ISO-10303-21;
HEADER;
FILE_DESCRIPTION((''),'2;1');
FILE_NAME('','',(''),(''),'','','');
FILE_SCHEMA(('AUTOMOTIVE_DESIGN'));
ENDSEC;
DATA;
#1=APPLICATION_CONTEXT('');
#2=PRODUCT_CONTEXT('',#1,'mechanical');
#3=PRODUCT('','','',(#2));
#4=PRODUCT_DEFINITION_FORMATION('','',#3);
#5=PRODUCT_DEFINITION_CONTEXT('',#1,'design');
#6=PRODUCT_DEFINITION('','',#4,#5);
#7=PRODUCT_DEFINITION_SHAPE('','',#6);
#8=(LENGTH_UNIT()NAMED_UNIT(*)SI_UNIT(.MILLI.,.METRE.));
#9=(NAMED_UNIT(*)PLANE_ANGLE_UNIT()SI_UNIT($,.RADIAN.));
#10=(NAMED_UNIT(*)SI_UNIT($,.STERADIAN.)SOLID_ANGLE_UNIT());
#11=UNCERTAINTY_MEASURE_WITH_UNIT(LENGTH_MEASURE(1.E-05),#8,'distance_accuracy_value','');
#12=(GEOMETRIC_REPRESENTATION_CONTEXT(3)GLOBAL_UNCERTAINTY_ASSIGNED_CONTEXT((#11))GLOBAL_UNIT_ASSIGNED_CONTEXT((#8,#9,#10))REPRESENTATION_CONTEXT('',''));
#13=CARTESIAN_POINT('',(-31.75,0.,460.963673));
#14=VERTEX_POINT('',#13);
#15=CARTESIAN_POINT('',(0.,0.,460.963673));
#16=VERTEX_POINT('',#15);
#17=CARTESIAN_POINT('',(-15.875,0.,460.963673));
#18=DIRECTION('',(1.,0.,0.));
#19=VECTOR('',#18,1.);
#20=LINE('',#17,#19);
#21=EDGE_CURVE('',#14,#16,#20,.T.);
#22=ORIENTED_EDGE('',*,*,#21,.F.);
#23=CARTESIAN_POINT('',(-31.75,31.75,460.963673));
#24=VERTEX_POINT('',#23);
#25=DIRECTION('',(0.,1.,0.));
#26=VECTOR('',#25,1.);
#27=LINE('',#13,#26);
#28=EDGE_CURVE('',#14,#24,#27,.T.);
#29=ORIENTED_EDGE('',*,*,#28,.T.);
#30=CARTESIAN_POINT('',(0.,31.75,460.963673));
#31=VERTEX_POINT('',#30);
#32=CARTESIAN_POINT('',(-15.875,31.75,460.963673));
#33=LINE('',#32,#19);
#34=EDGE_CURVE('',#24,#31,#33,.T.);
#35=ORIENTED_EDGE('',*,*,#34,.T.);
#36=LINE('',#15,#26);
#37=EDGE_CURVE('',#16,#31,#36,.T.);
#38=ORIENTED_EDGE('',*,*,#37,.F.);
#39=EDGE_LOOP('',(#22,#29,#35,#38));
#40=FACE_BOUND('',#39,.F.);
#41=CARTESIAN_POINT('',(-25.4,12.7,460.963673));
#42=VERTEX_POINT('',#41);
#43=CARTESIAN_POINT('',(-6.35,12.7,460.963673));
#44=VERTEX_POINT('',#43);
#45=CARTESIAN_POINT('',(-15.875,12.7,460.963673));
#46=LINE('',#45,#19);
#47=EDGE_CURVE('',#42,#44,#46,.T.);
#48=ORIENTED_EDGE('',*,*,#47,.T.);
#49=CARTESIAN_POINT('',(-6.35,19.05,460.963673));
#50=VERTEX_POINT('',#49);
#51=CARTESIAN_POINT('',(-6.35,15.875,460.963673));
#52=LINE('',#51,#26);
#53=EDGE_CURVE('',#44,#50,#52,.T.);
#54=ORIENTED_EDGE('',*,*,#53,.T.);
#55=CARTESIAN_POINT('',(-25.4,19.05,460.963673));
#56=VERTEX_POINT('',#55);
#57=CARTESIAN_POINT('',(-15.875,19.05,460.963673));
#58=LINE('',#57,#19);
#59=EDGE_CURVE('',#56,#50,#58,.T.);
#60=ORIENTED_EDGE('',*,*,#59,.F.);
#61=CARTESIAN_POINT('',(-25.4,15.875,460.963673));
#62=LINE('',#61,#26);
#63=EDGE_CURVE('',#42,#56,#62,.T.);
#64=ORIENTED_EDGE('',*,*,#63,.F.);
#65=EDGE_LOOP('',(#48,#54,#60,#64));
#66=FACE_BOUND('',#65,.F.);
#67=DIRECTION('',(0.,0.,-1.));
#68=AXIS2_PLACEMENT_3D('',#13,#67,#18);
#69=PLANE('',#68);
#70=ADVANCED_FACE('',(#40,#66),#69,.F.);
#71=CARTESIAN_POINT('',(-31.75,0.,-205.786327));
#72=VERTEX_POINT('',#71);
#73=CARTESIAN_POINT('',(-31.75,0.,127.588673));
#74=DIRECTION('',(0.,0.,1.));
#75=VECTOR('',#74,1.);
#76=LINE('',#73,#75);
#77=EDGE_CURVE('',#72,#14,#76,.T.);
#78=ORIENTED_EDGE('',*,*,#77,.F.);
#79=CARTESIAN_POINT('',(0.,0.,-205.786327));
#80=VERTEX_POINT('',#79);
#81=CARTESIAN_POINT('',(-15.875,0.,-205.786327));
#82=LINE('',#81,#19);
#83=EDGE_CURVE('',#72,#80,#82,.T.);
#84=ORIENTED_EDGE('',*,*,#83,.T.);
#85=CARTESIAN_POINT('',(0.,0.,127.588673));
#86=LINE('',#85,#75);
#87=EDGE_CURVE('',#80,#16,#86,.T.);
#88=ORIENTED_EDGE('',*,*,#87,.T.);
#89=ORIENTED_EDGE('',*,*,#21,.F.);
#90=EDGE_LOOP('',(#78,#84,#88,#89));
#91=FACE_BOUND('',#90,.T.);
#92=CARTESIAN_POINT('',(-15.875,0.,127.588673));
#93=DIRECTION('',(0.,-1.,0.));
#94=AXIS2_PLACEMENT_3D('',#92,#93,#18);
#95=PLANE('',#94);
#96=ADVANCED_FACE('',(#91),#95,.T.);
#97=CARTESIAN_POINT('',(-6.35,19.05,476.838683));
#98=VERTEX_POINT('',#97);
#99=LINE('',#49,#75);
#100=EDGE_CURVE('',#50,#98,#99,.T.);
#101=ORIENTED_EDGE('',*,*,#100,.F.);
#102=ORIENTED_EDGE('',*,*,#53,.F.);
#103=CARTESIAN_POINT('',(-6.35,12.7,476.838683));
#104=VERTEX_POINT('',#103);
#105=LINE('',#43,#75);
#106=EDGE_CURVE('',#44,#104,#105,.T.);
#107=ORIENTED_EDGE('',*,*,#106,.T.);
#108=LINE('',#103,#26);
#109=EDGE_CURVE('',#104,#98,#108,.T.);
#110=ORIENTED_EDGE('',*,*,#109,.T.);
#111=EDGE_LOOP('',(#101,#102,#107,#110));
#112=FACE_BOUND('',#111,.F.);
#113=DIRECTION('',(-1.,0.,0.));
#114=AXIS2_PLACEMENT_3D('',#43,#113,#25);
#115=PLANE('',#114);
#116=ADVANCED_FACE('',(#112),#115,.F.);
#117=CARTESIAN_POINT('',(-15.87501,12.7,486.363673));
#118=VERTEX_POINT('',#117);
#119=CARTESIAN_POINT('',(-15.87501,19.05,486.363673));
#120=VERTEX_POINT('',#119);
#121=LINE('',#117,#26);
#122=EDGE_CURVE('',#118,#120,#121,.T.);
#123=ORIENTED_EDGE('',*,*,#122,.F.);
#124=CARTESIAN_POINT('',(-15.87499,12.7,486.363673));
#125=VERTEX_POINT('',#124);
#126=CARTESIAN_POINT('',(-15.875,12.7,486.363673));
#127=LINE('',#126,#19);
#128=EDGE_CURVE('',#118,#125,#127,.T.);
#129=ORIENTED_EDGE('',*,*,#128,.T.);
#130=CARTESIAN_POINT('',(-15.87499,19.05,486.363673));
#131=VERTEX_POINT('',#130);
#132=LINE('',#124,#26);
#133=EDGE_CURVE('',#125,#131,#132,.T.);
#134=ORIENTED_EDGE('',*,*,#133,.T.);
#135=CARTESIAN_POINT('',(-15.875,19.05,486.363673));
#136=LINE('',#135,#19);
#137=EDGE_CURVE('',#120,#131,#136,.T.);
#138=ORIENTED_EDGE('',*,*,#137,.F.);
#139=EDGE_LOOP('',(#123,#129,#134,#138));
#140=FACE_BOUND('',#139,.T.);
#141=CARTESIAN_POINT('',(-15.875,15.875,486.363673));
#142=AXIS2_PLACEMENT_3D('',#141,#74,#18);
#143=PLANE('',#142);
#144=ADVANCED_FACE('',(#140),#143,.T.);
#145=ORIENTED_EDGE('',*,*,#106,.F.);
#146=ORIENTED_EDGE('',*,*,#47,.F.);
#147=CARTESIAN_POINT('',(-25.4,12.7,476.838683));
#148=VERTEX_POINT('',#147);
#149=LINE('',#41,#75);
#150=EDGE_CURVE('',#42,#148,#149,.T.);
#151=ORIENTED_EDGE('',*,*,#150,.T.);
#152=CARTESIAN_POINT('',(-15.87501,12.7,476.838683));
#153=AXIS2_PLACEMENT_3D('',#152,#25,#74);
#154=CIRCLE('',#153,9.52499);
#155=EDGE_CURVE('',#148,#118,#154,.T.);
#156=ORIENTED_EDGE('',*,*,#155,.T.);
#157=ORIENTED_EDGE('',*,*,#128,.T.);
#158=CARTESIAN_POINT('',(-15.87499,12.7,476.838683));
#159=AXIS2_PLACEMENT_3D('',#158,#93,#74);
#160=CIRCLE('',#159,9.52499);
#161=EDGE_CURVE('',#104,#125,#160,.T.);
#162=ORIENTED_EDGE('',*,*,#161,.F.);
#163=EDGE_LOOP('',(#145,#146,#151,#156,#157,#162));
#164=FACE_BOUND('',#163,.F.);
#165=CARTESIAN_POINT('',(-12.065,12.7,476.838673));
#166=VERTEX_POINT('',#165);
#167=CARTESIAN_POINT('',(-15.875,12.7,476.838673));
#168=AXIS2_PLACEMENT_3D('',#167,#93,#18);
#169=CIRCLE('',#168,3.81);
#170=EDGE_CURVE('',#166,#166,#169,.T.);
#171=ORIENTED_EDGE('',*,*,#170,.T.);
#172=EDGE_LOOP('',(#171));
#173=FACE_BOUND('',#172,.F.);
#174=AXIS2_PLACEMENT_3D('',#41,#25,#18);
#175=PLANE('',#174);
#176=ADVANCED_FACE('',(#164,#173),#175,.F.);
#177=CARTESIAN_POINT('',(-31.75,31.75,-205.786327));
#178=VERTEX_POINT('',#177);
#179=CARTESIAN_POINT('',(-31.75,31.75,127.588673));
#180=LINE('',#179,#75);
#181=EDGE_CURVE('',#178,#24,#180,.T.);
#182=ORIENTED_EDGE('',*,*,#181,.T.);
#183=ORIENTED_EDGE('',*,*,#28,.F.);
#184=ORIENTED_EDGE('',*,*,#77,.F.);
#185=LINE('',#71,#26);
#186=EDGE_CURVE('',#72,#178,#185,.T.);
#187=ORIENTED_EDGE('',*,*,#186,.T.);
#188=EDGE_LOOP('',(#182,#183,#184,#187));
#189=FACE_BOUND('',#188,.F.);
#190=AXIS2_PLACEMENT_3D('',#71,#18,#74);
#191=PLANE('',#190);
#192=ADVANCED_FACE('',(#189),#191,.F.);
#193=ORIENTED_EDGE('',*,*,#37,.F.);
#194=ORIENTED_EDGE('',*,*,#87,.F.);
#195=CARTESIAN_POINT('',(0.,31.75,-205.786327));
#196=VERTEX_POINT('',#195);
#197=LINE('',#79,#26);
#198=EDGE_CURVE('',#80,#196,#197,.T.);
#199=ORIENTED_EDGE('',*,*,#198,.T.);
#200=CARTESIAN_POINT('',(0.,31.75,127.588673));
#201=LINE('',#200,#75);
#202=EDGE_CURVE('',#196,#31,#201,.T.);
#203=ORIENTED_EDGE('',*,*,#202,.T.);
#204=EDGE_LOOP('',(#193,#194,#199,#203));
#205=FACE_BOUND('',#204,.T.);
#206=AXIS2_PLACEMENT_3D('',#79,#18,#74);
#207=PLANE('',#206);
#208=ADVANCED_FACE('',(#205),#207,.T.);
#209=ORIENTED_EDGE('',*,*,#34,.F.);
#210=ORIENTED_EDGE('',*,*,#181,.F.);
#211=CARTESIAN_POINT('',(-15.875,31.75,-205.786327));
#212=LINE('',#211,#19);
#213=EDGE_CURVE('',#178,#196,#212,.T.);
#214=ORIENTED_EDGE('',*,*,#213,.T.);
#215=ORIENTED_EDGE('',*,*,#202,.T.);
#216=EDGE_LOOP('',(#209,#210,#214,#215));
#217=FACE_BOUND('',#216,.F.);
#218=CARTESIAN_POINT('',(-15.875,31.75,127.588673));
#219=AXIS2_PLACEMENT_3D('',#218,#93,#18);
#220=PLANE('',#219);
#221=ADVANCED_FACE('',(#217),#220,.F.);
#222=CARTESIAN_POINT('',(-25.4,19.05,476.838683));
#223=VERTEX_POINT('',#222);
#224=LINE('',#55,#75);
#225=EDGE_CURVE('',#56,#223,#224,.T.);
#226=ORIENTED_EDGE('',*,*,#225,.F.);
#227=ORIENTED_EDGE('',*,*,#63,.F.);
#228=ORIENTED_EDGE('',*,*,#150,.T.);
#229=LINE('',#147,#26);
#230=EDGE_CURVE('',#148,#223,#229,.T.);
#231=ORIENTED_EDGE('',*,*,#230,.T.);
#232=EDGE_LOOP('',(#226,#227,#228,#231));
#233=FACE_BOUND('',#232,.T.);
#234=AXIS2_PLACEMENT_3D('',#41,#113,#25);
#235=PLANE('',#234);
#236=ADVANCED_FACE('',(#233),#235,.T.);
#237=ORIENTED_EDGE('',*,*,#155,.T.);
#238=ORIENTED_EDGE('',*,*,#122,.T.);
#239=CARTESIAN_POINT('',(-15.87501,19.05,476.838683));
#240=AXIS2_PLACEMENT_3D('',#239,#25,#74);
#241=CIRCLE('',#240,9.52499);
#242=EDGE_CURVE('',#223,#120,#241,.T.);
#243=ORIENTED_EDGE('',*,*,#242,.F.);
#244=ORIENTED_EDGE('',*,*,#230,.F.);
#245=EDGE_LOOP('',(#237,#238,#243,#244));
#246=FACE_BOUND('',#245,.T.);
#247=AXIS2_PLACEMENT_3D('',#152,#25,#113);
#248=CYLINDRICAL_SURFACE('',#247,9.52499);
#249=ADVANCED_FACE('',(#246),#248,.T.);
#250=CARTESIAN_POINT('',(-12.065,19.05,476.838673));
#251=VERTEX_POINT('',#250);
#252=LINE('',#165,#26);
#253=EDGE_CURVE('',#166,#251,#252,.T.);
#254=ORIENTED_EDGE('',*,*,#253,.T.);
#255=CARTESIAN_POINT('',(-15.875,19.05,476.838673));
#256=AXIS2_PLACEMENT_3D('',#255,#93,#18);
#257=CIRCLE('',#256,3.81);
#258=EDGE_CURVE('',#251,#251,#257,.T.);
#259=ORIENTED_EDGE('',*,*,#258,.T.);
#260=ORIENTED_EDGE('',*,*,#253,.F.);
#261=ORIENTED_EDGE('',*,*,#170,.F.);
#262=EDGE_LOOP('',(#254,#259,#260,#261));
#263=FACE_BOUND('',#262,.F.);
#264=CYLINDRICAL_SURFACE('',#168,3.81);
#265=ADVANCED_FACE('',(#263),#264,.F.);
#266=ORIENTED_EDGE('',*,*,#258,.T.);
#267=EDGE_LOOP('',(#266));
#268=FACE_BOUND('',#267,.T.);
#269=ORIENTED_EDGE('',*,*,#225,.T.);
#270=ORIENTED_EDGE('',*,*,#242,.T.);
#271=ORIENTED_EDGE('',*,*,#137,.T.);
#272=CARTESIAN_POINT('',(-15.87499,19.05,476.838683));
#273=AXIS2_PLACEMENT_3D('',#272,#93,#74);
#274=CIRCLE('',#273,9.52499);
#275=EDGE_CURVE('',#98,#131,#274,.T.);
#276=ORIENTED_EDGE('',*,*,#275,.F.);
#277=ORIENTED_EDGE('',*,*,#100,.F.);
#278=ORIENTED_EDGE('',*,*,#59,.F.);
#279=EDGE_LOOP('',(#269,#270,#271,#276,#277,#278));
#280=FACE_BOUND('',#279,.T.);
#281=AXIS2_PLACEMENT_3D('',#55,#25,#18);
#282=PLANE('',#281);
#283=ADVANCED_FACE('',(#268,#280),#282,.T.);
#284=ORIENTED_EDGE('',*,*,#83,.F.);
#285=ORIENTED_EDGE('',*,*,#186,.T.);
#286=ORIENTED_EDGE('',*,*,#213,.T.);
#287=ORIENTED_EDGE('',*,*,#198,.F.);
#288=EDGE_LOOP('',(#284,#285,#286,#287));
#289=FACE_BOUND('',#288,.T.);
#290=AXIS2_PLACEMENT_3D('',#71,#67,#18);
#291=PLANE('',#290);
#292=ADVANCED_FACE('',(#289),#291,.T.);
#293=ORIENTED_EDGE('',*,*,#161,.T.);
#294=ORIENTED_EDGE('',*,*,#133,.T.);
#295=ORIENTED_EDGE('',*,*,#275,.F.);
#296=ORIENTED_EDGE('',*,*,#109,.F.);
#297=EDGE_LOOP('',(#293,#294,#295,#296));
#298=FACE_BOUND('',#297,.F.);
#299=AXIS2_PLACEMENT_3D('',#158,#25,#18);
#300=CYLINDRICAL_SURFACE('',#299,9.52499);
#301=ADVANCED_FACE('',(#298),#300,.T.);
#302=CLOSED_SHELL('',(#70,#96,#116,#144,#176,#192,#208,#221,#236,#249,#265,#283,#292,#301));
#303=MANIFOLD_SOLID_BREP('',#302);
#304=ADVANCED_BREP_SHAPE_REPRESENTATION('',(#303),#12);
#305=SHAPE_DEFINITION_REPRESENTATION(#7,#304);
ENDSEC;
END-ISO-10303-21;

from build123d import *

# Parameters (mm, degrees)
F0_W     = 31.75
F0_H     = 666.75
F1_DEPTH = 31.75
F2_W     = 19.05
F2_H     = 6.35
F3_DEPTH = 25.4
F4_R     = 9.52499
F5_R     = 3.81
F6_DEPTH = 6.35


# Not quite as in the source:
# - a fillet or chamfer is up to 0.001 mm smaller than in the source, because OpenCascade refuses the exact size


with BuildPart() as f1:
    # F0 (on Front) → F1 (new body)
    with BuildSketch(Plane.XZ):
        with Locations((-15.875, 127.5886728781)):
            Rectangle(F0_W, F0_H)
    extrude(amount=-F1_DEPTH)

    # F2 (on face) → F3 (join)
    with BuildSketch(Plane.XY.offset(460.9636728781)):
        with Locations((-15.875, 15.875)):
            Rectangle(F2_W, F2_H)
    extrude(amount=F3_DEPTH)

    # F4 (radius 9.525 in the source; OpenCascade refuses exactly that, so slightly less here)
    f4_edges = [f1.edges().sort_by_distance(p)[0] for p in [
        (-6.35, 15.875, 486.363673),
        (-25.4, 15.875, 486.363673),
    ]]
    fillet(f4_edges, radius=F4_R)

    # F5 (on face) → F6 (cut)
    with BuildSketch(Plane.XZ.offset(-12.7)):
        with Locations((-15.875, 476.8386728781)):
            Circle(F5_R)
    extrude(amount=-F6_DEPTH, mode=Mode.SUBTRACT)


solid = f1.part
